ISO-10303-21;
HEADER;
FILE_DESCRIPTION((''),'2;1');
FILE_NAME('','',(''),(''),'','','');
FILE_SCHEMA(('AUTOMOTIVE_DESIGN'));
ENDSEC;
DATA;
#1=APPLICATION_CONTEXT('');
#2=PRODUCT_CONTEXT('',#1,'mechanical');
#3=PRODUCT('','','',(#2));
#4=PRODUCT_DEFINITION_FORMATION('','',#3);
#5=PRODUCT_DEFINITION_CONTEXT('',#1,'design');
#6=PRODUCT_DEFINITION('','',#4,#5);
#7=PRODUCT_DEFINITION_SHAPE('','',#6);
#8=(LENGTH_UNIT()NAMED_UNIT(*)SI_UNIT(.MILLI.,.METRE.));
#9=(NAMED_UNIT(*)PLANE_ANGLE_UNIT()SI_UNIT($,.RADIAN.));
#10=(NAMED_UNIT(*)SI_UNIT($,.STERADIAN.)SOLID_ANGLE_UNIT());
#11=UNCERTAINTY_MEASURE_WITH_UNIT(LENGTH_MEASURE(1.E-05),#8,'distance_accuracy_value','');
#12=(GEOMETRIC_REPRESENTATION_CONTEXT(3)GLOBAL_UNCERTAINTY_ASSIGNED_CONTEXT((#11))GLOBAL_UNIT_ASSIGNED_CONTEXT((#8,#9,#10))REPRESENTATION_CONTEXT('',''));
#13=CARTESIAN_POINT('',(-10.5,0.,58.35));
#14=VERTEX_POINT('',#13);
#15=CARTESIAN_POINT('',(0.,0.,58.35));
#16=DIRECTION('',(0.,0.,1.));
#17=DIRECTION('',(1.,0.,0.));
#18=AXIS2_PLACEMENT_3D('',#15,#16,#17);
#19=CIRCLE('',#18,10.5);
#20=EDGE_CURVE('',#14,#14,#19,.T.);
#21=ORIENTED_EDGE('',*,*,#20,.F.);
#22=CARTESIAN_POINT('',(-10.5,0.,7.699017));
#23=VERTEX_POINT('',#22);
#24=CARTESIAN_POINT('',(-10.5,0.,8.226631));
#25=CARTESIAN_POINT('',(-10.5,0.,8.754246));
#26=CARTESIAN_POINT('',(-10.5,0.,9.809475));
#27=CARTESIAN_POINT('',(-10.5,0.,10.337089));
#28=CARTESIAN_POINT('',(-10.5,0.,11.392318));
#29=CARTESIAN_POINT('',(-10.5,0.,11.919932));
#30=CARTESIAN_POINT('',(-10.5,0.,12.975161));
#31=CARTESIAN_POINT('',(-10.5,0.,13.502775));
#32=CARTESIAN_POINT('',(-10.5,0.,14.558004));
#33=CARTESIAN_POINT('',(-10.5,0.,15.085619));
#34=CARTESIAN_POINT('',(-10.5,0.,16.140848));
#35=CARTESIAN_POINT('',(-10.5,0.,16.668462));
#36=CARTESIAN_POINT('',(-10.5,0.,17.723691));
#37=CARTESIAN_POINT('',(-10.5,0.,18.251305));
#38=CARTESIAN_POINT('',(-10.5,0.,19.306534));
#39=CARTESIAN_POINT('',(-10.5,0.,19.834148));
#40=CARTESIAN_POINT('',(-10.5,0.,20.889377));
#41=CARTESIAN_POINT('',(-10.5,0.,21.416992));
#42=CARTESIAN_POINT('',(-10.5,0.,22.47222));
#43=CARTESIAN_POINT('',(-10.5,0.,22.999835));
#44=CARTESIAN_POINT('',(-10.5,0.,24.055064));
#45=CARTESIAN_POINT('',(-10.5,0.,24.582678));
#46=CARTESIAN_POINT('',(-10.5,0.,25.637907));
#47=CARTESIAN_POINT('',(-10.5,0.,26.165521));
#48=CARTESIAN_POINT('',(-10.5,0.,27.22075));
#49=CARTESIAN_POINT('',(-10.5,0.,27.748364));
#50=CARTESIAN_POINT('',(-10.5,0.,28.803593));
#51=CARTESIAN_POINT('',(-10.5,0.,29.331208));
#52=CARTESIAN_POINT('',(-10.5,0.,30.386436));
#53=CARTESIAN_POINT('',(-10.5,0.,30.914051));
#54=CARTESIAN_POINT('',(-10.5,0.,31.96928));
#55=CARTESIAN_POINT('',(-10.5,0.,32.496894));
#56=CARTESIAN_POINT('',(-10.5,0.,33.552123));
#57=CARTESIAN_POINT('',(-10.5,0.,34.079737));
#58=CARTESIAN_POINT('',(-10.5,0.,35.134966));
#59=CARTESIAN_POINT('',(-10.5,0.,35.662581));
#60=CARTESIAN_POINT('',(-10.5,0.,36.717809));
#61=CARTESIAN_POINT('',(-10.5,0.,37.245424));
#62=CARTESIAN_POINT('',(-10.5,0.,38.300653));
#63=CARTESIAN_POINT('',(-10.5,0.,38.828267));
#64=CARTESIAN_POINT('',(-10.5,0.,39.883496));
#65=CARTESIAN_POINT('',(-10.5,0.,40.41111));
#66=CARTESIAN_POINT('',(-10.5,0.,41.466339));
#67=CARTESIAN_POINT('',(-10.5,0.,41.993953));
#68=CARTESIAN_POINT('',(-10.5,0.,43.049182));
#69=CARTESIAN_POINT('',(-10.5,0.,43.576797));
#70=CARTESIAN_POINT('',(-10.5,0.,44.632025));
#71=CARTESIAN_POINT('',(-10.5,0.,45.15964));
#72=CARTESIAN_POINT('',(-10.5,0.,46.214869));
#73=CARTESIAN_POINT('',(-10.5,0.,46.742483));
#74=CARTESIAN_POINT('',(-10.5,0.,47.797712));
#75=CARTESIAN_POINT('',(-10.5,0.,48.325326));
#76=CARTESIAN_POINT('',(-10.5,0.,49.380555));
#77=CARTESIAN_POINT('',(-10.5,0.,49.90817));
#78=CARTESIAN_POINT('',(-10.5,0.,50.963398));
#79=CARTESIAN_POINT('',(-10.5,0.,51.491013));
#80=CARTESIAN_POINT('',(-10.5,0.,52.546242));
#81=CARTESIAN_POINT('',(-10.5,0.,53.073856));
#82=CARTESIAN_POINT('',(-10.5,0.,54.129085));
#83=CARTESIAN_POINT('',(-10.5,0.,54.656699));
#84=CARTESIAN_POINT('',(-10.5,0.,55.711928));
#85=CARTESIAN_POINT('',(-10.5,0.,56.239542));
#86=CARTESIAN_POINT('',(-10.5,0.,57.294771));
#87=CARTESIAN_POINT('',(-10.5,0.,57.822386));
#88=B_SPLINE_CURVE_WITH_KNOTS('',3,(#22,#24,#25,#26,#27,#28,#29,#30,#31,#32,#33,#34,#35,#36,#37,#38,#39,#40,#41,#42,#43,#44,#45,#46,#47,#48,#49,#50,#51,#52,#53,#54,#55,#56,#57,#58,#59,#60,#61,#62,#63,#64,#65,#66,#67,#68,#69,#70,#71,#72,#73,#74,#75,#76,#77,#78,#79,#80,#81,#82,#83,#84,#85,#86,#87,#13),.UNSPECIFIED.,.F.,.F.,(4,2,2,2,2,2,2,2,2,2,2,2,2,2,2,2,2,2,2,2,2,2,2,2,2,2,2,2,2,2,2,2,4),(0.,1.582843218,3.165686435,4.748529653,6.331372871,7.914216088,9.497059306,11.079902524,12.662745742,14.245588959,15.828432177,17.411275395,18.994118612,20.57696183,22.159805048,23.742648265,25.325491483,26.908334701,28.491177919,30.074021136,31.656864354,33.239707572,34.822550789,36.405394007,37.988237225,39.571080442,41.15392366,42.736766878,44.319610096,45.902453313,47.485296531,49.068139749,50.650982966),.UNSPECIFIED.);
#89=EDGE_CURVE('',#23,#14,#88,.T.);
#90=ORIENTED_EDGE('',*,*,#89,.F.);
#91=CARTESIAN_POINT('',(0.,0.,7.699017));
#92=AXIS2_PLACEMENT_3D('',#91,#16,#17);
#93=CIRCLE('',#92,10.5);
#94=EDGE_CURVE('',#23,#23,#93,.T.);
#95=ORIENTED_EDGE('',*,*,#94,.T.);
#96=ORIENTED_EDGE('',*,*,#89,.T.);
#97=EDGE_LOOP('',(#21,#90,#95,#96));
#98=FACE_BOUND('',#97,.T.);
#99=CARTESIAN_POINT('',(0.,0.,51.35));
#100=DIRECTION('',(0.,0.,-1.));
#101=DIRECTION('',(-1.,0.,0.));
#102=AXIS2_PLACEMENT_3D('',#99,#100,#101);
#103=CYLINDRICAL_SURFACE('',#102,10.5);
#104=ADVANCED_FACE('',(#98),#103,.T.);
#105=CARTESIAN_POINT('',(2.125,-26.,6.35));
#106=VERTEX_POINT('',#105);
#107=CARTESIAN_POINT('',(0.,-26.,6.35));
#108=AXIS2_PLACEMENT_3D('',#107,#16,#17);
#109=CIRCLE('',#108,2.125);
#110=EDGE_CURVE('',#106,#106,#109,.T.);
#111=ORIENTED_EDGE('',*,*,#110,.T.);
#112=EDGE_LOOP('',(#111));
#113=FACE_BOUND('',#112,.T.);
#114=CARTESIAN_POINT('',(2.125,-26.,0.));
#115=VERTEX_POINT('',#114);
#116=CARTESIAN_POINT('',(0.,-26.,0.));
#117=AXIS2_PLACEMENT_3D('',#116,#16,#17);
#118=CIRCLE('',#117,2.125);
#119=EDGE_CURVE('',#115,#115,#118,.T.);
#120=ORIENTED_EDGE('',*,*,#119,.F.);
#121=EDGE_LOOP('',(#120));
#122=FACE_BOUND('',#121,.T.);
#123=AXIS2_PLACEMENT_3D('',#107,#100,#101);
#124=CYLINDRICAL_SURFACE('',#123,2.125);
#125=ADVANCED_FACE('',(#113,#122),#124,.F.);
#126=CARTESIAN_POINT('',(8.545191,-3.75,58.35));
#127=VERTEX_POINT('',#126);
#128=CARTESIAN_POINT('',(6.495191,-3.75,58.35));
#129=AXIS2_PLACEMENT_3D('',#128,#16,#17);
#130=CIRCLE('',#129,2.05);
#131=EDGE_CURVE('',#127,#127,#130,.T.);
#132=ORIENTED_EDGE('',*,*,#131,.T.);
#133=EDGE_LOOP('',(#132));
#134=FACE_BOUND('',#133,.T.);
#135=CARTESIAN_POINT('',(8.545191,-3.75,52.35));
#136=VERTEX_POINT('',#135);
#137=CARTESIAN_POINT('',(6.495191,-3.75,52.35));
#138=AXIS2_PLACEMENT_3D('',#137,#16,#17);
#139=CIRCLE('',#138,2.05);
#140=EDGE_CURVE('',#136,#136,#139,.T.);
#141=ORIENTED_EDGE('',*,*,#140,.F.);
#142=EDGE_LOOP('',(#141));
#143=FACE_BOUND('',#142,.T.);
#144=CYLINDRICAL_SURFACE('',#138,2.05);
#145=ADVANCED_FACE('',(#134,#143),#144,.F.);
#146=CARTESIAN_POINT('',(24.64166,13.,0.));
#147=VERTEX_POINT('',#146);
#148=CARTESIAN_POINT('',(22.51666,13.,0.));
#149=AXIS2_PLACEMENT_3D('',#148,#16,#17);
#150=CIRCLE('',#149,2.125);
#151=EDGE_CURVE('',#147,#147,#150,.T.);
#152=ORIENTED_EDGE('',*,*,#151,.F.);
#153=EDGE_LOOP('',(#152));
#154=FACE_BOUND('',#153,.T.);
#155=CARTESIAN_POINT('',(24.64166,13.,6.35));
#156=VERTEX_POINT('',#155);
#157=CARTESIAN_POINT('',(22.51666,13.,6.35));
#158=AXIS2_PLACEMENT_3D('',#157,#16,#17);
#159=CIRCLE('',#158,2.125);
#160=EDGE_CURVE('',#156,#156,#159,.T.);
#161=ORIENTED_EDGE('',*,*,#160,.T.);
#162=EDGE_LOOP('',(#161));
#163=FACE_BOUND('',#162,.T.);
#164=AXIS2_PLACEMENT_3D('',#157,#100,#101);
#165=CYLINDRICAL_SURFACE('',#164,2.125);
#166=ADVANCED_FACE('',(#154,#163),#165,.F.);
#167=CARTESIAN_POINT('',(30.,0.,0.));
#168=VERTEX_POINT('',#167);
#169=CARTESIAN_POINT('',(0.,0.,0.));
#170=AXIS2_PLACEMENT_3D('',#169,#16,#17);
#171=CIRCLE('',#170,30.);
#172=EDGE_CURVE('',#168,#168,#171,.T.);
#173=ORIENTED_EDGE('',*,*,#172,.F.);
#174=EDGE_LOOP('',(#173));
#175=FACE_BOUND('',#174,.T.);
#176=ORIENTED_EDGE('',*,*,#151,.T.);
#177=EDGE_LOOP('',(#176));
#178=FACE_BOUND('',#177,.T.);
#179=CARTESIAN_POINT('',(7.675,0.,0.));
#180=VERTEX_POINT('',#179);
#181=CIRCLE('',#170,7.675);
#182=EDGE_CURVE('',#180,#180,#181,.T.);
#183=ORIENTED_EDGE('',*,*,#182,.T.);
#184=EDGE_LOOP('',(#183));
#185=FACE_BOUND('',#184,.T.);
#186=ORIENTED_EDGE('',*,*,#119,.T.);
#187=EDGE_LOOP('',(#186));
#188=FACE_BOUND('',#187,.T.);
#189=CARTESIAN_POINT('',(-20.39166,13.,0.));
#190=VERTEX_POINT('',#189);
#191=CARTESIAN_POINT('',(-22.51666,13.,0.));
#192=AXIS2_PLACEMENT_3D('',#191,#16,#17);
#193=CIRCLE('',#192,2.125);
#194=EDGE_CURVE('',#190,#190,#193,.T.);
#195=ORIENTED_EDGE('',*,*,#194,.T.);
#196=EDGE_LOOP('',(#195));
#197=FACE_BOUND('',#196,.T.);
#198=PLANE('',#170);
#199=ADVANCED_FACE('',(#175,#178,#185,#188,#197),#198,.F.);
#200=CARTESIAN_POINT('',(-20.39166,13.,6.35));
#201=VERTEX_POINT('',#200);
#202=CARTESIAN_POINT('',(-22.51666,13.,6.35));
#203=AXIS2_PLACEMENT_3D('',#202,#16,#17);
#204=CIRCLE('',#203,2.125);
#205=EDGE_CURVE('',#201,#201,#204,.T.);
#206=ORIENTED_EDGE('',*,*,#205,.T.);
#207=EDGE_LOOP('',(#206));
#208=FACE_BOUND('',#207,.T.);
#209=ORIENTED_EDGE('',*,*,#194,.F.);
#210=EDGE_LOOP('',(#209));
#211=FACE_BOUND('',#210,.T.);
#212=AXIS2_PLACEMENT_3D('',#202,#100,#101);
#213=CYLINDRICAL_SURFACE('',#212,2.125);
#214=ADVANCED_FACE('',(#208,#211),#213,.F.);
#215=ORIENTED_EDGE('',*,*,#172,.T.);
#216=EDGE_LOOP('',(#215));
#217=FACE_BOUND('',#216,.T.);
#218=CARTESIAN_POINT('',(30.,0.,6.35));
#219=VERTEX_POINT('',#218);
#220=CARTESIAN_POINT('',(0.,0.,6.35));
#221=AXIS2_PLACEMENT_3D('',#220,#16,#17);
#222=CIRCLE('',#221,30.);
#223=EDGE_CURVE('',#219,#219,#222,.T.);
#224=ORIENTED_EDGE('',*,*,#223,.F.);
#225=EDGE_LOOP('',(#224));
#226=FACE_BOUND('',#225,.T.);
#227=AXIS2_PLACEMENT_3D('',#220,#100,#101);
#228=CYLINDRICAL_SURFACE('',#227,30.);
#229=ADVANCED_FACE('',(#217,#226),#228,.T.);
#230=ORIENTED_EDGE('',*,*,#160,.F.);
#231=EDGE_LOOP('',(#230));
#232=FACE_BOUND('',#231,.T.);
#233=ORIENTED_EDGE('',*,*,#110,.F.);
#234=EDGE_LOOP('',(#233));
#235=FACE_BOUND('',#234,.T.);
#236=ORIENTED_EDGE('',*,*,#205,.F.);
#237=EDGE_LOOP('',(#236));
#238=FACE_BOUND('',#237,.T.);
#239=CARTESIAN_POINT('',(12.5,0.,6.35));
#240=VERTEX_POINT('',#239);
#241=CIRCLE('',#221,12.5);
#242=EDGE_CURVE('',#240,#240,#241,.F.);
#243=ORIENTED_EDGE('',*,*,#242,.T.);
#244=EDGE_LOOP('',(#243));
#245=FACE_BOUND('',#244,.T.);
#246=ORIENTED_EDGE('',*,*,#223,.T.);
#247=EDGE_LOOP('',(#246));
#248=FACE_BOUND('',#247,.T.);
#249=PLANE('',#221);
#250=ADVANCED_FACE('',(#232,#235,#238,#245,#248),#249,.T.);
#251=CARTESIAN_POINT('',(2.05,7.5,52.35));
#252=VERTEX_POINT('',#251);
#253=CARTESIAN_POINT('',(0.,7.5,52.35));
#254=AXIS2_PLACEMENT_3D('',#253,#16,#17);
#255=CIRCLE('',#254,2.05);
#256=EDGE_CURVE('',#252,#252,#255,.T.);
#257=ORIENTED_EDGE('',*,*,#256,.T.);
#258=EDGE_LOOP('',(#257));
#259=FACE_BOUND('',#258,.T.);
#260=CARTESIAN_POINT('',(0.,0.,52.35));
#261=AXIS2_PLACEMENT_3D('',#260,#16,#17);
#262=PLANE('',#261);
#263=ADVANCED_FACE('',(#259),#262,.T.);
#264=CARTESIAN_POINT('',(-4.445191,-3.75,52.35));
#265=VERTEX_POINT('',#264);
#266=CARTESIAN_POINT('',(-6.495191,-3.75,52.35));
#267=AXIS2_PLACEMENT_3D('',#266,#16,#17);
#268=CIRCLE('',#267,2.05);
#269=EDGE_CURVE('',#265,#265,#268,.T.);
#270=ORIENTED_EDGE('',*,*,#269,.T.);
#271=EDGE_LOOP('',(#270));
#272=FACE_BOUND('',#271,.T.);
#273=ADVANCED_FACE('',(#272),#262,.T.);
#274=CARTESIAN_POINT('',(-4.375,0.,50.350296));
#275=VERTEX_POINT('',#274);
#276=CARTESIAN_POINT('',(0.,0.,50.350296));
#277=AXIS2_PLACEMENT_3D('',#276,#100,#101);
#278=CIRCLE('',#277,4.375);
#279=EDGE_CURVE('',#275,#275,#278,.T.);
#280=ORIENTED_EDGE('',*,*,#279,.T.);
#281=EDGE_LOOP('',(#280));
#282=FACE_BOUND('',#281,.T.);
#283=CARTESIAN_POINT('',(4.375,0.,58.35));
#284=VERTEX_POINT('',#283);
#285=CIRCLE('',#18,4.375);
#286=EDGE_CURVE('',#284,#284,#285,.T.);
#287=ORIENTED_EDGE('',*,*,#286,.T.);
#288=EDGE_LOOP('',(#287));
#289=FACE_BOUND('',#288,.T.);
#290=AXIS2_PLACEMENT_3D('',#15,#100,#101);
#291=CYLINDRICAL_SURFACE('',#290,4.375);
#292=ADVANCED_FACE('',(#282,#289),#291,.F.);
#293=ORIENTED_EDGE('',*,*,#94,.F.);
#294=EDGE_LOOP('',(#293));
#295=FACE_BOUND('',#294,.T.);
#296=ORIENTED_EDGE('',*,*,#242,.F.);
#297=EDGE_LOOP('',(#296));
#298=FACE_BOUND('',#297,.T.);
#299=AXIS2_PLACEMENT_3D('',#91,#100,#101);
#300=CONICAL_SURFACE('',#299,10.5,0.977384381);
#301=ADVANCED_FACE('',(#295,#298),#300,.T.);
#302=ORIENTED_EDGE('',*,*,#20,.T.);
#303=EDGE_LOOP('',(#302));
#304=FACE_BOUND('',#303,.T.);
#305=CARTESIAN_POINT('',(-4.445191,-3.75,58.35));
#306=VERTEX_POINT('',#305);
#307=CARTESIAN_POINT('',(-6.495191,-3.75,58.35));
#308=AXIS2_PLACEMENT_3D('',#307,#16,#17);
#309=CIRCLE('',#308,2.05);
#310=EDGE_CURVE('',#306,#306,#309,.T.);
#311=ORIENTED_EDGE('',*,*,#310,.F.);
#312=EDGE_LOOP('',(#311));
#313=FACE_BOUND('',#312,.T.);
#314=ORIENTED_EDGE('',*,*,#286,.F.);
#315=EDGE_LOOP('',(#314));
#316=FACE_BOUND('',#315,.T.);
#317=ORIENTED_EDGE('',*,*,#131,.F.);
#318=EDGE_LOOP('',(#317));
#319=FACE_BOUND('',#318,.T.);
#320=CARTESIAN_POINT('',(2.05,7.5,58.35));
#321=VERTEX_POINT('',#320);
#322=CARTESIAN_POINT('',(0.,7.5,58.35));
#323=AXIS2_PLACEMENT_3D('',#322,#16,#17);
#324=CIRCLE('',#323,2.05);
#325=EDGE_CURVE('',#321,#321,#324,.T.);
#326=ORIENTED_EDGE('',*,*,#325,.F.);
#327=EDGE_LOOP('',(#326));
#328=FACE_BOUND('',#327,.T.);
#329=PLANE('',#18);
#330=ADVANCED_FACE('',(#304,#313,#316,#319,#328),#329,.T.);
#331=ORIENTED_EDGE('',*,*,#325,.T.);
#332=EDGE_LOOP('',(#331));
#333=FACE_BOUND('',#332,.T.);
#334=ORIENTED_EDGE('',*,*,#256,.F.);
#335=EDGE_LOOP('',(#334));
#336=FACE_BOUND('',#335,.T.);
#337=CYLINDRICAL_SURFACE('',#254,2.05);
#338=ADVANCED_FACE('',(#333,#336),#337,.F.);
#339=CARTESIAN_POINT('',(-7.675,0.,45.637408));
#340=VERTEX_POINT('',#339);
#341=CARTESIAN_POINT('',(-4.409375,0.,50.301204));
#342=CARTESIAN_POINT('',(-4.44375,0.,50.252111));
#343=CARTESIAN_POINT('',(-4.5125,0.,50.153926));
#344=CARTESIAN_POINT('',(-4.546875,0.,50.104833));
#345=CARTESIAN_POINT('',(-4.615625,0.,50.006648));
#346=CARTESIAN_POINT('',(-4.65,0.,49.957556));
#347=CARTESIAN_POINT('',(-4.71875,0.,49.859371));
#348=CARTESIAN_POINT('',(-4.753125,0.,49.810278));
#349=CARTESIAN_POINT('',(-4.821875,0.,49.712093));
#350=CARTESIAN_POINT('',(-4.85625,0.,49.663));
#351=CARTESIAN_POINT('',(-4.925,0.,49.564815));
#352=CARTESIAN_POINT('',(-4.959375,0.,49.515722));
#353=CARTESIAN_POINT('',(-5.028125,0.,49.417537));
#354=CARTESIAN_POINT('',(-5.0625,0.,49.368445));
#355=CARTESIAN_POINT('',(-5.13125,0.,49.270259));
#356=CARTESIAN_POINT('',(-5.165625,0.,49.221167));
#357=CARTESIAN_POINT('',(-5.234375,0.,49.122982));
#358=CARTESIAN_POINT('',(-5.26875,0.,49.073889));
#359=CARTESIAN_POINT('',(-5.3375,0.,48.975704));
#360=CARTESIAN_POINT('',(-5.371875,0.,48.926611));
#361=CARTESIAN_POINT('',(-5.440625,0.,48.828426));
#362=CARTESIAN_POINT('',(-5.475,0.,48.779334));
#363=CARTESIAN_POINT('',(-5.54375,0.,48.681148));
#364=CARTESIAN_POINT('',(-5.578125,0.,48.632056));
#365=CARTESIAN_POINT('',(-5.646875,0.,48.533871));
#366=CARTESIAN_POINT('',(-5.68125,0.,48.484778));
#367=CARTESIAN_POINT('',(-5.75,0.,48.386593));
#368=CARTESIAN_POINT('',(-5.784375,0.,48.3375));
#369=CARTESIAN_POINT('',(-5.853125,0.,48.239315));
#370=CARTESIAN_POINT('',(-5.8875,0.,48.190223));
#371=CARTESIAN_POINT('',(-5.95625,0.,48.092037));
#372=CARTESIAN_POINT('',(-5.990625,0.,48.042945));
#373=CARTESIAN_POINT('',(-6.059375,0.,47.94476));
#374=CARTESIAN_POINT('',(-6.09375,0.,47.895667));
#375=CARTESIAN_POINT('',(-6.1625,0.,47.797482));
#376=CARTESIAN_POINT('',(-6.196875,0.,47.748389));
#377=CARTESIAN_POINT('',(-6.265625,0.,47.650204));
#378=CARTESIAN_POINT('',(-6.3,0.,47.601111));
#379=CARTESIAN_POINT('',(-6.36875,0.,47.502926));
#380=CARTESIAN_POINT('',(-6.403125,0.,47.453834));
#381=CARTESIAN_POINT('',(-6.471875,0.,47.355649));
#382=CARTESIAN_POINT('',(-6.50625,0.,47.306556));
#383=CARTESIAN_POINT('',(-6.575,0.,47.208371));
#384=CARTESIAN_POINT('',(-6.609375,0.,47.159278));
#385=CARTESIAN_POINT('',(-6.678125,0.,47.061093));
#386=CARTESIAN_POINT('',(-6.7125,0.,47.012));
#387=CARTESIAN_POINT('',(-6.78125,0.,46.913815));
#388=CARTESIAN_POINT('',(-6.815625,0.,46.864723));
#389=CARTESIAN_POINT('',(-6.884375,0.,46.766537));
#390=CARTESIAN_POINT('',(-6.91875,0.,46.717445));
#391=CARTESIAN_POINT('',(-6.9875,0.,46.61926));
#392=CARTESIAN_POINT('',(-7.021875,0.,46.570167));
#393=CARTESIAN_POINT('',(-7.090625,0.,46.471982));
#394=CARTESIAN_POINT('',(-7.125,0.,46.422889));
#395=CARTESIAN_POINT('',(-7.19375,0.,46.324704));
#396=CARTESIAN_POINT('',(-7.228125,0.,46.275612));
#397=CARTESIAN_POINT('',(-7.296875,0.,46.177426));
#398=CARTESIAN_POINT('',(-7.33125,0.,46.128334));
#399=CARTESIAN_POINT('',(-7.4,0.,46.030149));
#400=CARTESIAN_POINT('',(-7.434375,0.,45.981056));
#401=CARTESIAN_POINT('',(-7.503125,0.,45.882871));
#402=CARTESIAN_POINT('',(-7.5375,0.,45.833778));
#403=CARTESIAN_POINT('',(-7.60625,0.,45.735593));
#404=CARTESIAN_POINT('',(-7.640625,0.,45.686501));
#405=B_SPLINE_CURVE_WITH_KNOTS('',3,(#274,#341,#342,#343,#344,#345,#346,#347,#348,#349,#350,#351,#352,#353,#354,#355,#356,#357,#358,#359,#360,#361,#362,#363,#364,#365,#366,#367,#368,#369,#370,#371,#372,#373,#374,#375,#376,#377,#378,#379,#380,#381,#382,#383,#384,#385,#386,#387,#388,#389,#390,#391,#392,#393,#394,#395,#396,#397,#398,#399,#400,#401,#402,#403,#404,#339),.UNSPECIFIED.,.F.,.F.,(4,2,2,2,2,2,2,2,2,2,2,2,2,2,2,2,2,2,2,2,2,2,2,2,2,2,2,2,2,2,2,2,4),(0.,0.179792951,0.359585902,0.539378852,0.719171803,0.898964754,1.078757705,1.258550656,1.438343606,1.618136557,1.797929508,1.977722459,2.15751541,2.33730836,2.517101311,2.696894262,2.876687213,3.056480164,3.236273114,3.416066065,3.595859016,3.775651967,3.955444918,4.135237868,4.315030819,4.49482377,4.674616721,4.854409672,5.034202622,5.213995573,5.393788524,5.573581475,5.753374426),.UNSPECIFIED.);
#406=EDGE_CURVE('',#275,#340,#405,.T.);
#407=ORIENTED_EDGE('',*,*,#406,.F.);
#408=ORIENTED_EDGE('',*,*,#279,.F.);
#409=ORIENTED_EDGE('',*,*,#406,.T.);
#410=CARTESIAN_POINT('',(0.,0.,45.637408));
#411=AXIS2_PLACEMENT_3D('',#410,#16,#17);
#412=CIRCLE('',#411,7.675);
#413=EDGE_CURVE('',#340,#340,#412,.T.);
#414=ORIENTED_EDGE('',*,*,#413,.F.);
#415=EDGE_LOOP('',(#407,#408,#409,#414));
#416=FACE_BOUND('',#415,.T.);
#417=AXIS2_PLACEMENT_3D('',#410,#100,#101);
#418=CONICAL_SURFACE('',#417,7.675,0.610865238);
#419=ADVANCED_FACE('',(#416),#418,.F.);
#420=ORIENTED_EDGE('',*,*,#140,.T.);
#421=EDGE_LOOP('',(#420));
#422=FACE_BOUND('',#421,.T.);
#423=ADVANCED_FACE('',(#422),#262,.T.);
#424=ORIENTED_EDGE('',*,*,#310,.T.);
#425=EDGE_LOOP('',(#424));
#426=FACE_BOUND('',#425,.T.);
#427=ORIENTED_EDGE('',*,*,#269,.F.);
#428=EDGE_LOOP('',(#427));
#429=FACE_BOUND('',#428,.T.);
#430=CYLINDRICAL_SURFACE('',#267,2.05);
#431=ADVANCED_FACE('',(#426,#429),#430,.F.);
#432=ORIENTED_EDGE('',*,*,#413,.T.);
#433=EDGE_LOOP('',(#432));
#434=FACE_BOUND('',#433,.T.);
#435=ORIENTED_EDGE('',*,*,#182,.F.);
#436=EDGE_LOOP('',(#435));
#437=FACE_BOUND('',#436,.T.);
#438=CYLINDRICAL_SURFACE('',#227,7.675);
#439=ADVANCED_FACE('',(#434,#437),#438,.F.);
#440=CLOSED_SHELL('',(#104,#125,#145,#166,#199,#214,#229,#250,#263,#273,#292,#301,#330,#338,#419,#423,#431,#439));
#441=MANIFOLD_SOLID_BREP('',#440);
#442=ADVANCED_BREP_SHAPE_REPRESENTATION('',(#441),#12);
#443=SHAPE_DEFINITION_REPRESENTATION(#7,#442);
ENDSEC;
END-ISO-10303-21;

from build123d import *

# Parameters (mm, degrees)
ESQUISSE3_R         = 30
ESQUISSE3_R_2       = 2.125
ESQUISSE3_R_3       = 7.675
BOSS_EXTRU_1_DEPTH  = 6.35
ESQUISSE4_R         = 10.5
ESQUISSE4_R_2       = 7.675
BOSS_EXTRU_2_DEPTH  = 45
SKETCH1_R           = 10.5
SKETCH1_R_2         = 4.375
BOSS_EXTRUDE1_DEPTH = 7
SKETCH2_R           = 2.05
CUT_EXTRUDE1_DEPTH  = 6
CHAMFER2_SIZE       = 5.712592027
CHAMFER2_SIZE_2     = 4
CHAMFER3_SIZE       = 2
CHAMFER3_SIZE2      = 1.349017034


with BuildPart() as part:
    # Esquisse3 → Boss.-Extru.1 (new body)
    with BuildSketch(Plane.XY):
        Circle(ESQUISSE3_R)
        with Locations((-22.516660498, 13)):
            Circle(ESQUISSE3_R_2, mode=Mode.SUBTRACT)
        with Locations((22.516660498, 13)):
            Circle(ESQUISSE3_R_2, mode=Mode.SUBTRACT)
        with Locations((0, -26)):
            Circle(ESQUISSE3_R_2, mode=Mode.SUBTRACT)
        Circle(ESQUISSE3_R_3, mode=Mode.SUBTRACT)
    extrude(amount=BOSS_EXTRU_1_DEPTH)

    # Esquisse4 → Boss.-Extru.2 (add)
    with BuildSketch(Plane.XY.offset(6.35)):
        with Locations(Location((0, 0, 0), (0, 0, 180))):
            Circle(ESQUISSE4_R)
        Circle(ESQUISSE4_R_2, mode=Mode.SUBTRACT)
    extrude(amount=BOSS_EXTRU_2_DEPTH)

    # Sketch1 → Boss-Extrude1 (add)
    with BuildSketch(Plane.XY.offset(51.35)):
        with Locations(Location((0, 0, 0), (0, 0, 180))):
            Circle(SKETCH1_R)
        Circle(SKETCH1_R_2, mode=Mode.SUBTRACT)
    extrude(amount=BOSS_EXTRUDE1_DEPTH)

    # Sketch2 → Cut-Extrude1 (cut)
    with BuildSketch(Plane.XY.offset(58.35)):
        with Locations((0, 7.5)):
            Circle(SKETCH2_R)
        with Locations((-6.495190528, -3.75)):
            Circle(SKETCH2_R)
        with Locations((6.495190528, -3.75)):
            Circle(SKETCH2_R)
    extrude(amount=-CUT_EXTRUDE1_DEPTH, mode=Mode.SUBTRACT)

    # Chamfer2
    # the kernel refuses this chamfer: 5.712592027, 4 mm, written as the material it adds along each edge
    with BuildSketch(Plane(origin=(0, 0, 51.35), x_dir=(1, 0, 0), z_dir=(0, -1, 0))) as chamfer2_piece_1_section:
        Polygon((7.675, -CHAMFER2_SIZE), (7.675 - CHAMFER2_SIZE_2, 0), (7.675, 0), align=None)
    chamfer2_piece_1 = revolve(axis=Axis((0, 0, 51.35), (0, 0, 1)), mode=Mode.PRIVATE)
    chamfer2_piece_1 = chamfer2_piece_1 - Plane(origin=(0, 0, 47.945767055), x_dir=(1, 0, 0), z_dir=(0, 0, -1)) * Cylinder(4.375, 31, mode=Mode.PRIVATE)
    add(chamfer2_piece_1)

    # Chamfer3
    chamfer3_edges = [part.edges().sort_by_distance(p)[0] for p in [
        (10.5, 0, 6.35),
    ]]
    chamfer3_side = [part.faces().sort_by_distance(p)[0] for p in [
        (-29.151471863, 0, 6.35),
    ]]
    chamfer(chamfer3_edges, length=CHAMFER3_SIZE, length2=CHAMFER3_SIZE2, reference=chamfer3_side[0])


solid = part.part
